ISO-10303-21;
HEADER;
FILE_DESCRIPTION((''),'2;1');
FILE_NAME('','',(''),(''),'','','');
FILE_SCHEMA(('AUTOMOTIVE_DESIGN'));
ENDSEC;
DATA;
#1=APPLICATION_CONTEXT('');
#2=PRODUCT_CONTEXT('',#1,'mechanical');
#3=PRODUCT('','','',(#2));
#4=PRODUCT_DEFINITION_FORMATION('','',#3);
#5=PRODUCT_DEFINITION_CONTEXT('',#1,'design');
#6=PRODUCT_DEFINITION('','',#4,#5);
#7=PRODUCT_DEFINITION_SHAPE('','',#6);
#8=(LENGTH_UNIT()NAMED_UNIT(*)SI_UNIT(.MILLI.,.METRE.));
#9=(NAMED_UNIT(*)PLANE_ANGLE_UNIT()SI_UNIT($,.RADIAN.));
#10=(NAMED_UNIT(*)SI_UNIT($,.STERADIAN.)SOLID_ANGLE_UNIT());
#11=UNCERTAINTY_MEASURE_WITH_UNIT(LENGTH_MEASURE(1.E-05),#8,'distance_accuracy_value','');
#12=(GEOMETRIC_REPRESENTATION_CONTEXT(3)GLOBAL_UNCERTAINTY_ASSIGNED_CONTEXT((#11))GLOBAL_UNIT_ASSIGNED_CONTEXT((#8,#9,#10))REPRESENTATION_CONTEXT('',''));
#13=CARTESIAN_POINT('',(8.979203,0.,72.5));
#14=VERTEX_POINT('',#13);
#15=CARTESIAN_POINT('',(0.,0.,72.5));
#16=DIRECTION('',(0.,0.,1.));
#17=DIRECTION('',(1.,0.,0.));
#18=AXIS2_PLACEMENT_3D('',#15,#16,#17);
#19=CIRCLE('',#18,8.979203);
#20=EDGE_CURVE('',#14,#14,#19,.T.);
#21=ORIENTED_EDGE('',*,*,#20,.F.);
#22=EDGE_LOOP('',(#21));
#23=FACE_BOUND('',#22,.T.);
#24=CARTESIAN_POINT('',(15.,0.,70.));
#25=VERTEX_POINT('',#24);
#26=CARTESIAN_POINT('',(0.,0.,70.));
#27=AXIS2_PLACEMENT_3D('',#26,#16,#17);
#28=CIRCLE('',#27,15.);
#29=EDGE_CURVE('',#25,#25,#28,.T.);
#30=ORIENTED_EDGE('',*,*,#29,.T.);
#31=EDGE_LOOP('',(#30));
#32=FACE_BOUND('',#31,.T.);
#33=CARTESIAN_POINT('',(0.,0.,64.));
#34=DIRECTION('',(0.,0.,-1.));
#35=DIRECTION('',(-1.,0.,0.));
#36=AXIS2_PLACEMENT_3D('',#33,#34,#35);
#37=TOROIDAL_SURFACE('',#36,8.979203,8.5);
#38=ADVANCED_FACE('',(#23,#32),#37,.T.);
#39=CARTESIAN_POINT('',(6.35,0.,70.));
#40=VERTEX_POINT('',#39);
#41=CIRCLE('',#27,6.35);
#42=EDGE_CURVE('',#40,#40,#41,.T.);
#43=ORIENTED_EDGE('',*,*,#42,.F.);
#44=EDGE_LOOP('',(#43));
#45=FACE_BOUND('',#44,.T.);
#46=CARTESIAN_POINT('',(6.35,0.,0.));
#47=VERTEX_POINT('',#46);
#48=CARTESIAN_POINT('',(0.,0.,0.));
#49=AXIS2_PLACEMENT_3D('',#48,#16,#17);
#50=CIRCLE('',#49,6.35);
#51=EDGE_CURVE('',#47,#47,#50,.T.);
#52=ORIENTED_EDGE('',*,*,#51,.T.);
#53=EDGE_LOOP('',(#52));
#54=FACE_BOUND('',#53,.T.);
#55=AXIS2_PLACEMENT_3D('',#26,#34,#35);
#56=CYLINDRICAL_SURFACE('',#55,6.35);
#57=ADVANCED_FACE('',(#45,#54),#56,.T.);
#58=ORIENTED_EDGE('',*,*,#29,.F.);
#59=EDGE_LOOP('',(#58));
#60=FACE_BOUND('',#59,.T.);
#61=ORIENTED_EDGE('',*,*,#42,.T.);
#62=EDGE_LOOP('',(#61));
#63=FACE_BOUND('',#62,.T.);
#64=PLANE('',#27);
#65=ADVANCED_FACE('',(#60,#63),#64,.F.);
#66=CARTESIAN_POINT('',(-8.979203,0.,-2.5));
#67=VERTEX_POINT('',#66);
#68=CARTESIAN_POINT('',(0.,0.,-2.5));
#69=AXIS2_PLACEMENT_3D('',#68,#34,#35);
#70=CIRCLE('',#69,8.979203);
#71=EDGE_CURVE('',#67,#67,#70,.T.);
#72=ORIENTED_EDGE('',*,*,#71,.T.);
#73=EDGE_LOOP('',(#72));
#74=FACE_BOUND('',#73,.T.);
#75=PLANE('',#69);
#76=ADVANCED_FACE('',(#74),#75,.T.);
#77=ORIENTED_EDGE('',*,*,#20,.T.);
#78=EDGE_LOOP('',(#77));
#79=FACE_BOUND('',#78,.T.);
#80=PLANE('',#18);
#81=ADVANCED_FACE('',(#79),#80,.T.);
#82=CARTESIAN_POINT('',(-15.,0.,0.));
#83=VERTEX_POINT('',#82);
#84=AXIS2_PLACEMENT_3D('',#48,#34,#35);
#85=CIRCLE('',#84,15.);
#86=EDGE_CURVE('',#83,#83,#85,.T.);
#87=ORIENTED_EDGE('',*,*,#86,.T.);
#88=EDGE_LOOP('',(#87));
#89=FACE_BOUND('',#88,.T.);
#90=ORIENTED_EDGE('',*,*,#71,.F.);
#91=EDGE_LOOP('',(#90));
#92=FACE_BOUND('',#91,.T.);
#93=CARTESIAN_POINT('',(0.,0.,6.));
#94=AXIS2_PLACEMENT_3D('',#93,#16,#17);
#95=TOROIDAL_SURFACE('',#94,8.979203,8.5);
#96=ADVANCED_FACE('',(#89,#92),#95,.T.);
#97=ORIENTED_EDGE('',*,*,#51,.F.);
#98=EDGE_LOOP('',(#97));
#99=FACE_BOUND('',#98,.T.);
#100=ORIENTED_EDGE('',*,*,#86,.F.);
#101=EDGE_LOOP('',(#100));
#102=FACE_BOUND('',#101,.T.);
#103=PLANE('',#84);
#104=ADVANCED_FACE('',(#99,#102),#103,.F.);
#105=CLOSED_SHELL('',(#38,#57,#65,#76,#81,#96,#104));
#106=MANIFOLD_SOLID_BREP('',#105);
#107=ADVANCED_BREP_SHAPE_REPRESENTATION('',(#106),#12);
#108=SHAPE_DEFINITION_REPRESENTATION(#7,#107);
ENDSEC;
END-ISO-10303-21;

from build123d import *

# Parameters (mm, degrees)
SKETCH1_R           = 6.35
BOSS_EXTRUDE1_DEPTH = 70
SKETCH2_R           = 15
BOSS_EXTRUDE2_DEPTH = 2.5
BOSS_EXTRUDE3_START = 2.5
SKETCH3_R           = 15
BOSS_EXTRUDE3_DEPTH = 2.5
FILLET1_R           = 8.5


with BuildPart() as part:
    # Sketch1 → Boss-Extrude1 (new body)
    with BuildSketch(Plane.XY):
        Circle(SKETCH1_R)
    extrude(amount=BOSS_EXTRUDE1_DEPTH)

    # Sketch2 → Boss-Extrude2 (add)
    with BuildSketch(Plane(origin=(0, 0, 0), x_dir=(-1, 0, 0), z_dir=(0, 0, -1))):
        Circle(SKETCH2_R)
    extrude(amount=BOSS_EXTRUDE2_DEPTH)

    # Sketch3 → Boss-Extrude3 (add)
    with BuildSketch(Plane.XY.offset(70).offset(BOSS_EXTRUDE3_START)):
        with Locations(Location((0, 0, 0), (0, 0, 180))):
            Circle(SKETCH3_R)
    extrude(amount=-BOSS_EXTRUDE3_DEPTH)

    # Fillet1
    # the kernel refuses this fillet: 8.5 mm, written as the material it takes off along each edge
    with BuildSketch(Plane(origin=(0, 0, 72.5), x_dir=(-1, 0, 0), z_dir=(0, 1, 0))) as fillet1_piece_1:
        with BuildLine():
            CenterArc((8.979202711, -8.5), FILLET1_R, 44.900872156, 45.099127844)
            Line((8.979202711, 0), (8.979202711, 0.17))
            Line((8.979202711, 0.17), (15, 0.17))
            Line((15, 0.17), (15.17, 0))
            ThreePointArc((15.17, 0), (15.17, -1.25), (15.120415946, -2.38))
            Line((15.120415946, -2.38), (15, -2.5))
        make_face()
    revolve(axis=Axis((0, 0, 72.5), (0, 0, 1)), mode=Mode.SUBTRACT)
    with BuildSketch(Plane(origin=(0, 0, -2.5), x_dir=(-1, 0, 0), z_dir=(0, -1, 0))) as fillet1_piece_2:
        with BuildLine():
            CenterArc((8.979202711, -8.5), FILLET1_R, 44.900872156, 45.099127844)
            Line((8.979202711, 0), (8.979202711, 0.17))
            Line((8.979202711, 0.17), (15, 0.17))
            Line((15, 0.17), (15.17, 0))
            ThreePointArc((15.17, 0), (15.17, -1.25), (15.120415946, -2.38))
            Line((15.120415946, -2.38), (15, -2.5))
        make_face()
    revolve(axis=Axis((0, 0, -2.5), (0, 0, -1)), mode=Mode.SUBTRACT)


solid = part.part
